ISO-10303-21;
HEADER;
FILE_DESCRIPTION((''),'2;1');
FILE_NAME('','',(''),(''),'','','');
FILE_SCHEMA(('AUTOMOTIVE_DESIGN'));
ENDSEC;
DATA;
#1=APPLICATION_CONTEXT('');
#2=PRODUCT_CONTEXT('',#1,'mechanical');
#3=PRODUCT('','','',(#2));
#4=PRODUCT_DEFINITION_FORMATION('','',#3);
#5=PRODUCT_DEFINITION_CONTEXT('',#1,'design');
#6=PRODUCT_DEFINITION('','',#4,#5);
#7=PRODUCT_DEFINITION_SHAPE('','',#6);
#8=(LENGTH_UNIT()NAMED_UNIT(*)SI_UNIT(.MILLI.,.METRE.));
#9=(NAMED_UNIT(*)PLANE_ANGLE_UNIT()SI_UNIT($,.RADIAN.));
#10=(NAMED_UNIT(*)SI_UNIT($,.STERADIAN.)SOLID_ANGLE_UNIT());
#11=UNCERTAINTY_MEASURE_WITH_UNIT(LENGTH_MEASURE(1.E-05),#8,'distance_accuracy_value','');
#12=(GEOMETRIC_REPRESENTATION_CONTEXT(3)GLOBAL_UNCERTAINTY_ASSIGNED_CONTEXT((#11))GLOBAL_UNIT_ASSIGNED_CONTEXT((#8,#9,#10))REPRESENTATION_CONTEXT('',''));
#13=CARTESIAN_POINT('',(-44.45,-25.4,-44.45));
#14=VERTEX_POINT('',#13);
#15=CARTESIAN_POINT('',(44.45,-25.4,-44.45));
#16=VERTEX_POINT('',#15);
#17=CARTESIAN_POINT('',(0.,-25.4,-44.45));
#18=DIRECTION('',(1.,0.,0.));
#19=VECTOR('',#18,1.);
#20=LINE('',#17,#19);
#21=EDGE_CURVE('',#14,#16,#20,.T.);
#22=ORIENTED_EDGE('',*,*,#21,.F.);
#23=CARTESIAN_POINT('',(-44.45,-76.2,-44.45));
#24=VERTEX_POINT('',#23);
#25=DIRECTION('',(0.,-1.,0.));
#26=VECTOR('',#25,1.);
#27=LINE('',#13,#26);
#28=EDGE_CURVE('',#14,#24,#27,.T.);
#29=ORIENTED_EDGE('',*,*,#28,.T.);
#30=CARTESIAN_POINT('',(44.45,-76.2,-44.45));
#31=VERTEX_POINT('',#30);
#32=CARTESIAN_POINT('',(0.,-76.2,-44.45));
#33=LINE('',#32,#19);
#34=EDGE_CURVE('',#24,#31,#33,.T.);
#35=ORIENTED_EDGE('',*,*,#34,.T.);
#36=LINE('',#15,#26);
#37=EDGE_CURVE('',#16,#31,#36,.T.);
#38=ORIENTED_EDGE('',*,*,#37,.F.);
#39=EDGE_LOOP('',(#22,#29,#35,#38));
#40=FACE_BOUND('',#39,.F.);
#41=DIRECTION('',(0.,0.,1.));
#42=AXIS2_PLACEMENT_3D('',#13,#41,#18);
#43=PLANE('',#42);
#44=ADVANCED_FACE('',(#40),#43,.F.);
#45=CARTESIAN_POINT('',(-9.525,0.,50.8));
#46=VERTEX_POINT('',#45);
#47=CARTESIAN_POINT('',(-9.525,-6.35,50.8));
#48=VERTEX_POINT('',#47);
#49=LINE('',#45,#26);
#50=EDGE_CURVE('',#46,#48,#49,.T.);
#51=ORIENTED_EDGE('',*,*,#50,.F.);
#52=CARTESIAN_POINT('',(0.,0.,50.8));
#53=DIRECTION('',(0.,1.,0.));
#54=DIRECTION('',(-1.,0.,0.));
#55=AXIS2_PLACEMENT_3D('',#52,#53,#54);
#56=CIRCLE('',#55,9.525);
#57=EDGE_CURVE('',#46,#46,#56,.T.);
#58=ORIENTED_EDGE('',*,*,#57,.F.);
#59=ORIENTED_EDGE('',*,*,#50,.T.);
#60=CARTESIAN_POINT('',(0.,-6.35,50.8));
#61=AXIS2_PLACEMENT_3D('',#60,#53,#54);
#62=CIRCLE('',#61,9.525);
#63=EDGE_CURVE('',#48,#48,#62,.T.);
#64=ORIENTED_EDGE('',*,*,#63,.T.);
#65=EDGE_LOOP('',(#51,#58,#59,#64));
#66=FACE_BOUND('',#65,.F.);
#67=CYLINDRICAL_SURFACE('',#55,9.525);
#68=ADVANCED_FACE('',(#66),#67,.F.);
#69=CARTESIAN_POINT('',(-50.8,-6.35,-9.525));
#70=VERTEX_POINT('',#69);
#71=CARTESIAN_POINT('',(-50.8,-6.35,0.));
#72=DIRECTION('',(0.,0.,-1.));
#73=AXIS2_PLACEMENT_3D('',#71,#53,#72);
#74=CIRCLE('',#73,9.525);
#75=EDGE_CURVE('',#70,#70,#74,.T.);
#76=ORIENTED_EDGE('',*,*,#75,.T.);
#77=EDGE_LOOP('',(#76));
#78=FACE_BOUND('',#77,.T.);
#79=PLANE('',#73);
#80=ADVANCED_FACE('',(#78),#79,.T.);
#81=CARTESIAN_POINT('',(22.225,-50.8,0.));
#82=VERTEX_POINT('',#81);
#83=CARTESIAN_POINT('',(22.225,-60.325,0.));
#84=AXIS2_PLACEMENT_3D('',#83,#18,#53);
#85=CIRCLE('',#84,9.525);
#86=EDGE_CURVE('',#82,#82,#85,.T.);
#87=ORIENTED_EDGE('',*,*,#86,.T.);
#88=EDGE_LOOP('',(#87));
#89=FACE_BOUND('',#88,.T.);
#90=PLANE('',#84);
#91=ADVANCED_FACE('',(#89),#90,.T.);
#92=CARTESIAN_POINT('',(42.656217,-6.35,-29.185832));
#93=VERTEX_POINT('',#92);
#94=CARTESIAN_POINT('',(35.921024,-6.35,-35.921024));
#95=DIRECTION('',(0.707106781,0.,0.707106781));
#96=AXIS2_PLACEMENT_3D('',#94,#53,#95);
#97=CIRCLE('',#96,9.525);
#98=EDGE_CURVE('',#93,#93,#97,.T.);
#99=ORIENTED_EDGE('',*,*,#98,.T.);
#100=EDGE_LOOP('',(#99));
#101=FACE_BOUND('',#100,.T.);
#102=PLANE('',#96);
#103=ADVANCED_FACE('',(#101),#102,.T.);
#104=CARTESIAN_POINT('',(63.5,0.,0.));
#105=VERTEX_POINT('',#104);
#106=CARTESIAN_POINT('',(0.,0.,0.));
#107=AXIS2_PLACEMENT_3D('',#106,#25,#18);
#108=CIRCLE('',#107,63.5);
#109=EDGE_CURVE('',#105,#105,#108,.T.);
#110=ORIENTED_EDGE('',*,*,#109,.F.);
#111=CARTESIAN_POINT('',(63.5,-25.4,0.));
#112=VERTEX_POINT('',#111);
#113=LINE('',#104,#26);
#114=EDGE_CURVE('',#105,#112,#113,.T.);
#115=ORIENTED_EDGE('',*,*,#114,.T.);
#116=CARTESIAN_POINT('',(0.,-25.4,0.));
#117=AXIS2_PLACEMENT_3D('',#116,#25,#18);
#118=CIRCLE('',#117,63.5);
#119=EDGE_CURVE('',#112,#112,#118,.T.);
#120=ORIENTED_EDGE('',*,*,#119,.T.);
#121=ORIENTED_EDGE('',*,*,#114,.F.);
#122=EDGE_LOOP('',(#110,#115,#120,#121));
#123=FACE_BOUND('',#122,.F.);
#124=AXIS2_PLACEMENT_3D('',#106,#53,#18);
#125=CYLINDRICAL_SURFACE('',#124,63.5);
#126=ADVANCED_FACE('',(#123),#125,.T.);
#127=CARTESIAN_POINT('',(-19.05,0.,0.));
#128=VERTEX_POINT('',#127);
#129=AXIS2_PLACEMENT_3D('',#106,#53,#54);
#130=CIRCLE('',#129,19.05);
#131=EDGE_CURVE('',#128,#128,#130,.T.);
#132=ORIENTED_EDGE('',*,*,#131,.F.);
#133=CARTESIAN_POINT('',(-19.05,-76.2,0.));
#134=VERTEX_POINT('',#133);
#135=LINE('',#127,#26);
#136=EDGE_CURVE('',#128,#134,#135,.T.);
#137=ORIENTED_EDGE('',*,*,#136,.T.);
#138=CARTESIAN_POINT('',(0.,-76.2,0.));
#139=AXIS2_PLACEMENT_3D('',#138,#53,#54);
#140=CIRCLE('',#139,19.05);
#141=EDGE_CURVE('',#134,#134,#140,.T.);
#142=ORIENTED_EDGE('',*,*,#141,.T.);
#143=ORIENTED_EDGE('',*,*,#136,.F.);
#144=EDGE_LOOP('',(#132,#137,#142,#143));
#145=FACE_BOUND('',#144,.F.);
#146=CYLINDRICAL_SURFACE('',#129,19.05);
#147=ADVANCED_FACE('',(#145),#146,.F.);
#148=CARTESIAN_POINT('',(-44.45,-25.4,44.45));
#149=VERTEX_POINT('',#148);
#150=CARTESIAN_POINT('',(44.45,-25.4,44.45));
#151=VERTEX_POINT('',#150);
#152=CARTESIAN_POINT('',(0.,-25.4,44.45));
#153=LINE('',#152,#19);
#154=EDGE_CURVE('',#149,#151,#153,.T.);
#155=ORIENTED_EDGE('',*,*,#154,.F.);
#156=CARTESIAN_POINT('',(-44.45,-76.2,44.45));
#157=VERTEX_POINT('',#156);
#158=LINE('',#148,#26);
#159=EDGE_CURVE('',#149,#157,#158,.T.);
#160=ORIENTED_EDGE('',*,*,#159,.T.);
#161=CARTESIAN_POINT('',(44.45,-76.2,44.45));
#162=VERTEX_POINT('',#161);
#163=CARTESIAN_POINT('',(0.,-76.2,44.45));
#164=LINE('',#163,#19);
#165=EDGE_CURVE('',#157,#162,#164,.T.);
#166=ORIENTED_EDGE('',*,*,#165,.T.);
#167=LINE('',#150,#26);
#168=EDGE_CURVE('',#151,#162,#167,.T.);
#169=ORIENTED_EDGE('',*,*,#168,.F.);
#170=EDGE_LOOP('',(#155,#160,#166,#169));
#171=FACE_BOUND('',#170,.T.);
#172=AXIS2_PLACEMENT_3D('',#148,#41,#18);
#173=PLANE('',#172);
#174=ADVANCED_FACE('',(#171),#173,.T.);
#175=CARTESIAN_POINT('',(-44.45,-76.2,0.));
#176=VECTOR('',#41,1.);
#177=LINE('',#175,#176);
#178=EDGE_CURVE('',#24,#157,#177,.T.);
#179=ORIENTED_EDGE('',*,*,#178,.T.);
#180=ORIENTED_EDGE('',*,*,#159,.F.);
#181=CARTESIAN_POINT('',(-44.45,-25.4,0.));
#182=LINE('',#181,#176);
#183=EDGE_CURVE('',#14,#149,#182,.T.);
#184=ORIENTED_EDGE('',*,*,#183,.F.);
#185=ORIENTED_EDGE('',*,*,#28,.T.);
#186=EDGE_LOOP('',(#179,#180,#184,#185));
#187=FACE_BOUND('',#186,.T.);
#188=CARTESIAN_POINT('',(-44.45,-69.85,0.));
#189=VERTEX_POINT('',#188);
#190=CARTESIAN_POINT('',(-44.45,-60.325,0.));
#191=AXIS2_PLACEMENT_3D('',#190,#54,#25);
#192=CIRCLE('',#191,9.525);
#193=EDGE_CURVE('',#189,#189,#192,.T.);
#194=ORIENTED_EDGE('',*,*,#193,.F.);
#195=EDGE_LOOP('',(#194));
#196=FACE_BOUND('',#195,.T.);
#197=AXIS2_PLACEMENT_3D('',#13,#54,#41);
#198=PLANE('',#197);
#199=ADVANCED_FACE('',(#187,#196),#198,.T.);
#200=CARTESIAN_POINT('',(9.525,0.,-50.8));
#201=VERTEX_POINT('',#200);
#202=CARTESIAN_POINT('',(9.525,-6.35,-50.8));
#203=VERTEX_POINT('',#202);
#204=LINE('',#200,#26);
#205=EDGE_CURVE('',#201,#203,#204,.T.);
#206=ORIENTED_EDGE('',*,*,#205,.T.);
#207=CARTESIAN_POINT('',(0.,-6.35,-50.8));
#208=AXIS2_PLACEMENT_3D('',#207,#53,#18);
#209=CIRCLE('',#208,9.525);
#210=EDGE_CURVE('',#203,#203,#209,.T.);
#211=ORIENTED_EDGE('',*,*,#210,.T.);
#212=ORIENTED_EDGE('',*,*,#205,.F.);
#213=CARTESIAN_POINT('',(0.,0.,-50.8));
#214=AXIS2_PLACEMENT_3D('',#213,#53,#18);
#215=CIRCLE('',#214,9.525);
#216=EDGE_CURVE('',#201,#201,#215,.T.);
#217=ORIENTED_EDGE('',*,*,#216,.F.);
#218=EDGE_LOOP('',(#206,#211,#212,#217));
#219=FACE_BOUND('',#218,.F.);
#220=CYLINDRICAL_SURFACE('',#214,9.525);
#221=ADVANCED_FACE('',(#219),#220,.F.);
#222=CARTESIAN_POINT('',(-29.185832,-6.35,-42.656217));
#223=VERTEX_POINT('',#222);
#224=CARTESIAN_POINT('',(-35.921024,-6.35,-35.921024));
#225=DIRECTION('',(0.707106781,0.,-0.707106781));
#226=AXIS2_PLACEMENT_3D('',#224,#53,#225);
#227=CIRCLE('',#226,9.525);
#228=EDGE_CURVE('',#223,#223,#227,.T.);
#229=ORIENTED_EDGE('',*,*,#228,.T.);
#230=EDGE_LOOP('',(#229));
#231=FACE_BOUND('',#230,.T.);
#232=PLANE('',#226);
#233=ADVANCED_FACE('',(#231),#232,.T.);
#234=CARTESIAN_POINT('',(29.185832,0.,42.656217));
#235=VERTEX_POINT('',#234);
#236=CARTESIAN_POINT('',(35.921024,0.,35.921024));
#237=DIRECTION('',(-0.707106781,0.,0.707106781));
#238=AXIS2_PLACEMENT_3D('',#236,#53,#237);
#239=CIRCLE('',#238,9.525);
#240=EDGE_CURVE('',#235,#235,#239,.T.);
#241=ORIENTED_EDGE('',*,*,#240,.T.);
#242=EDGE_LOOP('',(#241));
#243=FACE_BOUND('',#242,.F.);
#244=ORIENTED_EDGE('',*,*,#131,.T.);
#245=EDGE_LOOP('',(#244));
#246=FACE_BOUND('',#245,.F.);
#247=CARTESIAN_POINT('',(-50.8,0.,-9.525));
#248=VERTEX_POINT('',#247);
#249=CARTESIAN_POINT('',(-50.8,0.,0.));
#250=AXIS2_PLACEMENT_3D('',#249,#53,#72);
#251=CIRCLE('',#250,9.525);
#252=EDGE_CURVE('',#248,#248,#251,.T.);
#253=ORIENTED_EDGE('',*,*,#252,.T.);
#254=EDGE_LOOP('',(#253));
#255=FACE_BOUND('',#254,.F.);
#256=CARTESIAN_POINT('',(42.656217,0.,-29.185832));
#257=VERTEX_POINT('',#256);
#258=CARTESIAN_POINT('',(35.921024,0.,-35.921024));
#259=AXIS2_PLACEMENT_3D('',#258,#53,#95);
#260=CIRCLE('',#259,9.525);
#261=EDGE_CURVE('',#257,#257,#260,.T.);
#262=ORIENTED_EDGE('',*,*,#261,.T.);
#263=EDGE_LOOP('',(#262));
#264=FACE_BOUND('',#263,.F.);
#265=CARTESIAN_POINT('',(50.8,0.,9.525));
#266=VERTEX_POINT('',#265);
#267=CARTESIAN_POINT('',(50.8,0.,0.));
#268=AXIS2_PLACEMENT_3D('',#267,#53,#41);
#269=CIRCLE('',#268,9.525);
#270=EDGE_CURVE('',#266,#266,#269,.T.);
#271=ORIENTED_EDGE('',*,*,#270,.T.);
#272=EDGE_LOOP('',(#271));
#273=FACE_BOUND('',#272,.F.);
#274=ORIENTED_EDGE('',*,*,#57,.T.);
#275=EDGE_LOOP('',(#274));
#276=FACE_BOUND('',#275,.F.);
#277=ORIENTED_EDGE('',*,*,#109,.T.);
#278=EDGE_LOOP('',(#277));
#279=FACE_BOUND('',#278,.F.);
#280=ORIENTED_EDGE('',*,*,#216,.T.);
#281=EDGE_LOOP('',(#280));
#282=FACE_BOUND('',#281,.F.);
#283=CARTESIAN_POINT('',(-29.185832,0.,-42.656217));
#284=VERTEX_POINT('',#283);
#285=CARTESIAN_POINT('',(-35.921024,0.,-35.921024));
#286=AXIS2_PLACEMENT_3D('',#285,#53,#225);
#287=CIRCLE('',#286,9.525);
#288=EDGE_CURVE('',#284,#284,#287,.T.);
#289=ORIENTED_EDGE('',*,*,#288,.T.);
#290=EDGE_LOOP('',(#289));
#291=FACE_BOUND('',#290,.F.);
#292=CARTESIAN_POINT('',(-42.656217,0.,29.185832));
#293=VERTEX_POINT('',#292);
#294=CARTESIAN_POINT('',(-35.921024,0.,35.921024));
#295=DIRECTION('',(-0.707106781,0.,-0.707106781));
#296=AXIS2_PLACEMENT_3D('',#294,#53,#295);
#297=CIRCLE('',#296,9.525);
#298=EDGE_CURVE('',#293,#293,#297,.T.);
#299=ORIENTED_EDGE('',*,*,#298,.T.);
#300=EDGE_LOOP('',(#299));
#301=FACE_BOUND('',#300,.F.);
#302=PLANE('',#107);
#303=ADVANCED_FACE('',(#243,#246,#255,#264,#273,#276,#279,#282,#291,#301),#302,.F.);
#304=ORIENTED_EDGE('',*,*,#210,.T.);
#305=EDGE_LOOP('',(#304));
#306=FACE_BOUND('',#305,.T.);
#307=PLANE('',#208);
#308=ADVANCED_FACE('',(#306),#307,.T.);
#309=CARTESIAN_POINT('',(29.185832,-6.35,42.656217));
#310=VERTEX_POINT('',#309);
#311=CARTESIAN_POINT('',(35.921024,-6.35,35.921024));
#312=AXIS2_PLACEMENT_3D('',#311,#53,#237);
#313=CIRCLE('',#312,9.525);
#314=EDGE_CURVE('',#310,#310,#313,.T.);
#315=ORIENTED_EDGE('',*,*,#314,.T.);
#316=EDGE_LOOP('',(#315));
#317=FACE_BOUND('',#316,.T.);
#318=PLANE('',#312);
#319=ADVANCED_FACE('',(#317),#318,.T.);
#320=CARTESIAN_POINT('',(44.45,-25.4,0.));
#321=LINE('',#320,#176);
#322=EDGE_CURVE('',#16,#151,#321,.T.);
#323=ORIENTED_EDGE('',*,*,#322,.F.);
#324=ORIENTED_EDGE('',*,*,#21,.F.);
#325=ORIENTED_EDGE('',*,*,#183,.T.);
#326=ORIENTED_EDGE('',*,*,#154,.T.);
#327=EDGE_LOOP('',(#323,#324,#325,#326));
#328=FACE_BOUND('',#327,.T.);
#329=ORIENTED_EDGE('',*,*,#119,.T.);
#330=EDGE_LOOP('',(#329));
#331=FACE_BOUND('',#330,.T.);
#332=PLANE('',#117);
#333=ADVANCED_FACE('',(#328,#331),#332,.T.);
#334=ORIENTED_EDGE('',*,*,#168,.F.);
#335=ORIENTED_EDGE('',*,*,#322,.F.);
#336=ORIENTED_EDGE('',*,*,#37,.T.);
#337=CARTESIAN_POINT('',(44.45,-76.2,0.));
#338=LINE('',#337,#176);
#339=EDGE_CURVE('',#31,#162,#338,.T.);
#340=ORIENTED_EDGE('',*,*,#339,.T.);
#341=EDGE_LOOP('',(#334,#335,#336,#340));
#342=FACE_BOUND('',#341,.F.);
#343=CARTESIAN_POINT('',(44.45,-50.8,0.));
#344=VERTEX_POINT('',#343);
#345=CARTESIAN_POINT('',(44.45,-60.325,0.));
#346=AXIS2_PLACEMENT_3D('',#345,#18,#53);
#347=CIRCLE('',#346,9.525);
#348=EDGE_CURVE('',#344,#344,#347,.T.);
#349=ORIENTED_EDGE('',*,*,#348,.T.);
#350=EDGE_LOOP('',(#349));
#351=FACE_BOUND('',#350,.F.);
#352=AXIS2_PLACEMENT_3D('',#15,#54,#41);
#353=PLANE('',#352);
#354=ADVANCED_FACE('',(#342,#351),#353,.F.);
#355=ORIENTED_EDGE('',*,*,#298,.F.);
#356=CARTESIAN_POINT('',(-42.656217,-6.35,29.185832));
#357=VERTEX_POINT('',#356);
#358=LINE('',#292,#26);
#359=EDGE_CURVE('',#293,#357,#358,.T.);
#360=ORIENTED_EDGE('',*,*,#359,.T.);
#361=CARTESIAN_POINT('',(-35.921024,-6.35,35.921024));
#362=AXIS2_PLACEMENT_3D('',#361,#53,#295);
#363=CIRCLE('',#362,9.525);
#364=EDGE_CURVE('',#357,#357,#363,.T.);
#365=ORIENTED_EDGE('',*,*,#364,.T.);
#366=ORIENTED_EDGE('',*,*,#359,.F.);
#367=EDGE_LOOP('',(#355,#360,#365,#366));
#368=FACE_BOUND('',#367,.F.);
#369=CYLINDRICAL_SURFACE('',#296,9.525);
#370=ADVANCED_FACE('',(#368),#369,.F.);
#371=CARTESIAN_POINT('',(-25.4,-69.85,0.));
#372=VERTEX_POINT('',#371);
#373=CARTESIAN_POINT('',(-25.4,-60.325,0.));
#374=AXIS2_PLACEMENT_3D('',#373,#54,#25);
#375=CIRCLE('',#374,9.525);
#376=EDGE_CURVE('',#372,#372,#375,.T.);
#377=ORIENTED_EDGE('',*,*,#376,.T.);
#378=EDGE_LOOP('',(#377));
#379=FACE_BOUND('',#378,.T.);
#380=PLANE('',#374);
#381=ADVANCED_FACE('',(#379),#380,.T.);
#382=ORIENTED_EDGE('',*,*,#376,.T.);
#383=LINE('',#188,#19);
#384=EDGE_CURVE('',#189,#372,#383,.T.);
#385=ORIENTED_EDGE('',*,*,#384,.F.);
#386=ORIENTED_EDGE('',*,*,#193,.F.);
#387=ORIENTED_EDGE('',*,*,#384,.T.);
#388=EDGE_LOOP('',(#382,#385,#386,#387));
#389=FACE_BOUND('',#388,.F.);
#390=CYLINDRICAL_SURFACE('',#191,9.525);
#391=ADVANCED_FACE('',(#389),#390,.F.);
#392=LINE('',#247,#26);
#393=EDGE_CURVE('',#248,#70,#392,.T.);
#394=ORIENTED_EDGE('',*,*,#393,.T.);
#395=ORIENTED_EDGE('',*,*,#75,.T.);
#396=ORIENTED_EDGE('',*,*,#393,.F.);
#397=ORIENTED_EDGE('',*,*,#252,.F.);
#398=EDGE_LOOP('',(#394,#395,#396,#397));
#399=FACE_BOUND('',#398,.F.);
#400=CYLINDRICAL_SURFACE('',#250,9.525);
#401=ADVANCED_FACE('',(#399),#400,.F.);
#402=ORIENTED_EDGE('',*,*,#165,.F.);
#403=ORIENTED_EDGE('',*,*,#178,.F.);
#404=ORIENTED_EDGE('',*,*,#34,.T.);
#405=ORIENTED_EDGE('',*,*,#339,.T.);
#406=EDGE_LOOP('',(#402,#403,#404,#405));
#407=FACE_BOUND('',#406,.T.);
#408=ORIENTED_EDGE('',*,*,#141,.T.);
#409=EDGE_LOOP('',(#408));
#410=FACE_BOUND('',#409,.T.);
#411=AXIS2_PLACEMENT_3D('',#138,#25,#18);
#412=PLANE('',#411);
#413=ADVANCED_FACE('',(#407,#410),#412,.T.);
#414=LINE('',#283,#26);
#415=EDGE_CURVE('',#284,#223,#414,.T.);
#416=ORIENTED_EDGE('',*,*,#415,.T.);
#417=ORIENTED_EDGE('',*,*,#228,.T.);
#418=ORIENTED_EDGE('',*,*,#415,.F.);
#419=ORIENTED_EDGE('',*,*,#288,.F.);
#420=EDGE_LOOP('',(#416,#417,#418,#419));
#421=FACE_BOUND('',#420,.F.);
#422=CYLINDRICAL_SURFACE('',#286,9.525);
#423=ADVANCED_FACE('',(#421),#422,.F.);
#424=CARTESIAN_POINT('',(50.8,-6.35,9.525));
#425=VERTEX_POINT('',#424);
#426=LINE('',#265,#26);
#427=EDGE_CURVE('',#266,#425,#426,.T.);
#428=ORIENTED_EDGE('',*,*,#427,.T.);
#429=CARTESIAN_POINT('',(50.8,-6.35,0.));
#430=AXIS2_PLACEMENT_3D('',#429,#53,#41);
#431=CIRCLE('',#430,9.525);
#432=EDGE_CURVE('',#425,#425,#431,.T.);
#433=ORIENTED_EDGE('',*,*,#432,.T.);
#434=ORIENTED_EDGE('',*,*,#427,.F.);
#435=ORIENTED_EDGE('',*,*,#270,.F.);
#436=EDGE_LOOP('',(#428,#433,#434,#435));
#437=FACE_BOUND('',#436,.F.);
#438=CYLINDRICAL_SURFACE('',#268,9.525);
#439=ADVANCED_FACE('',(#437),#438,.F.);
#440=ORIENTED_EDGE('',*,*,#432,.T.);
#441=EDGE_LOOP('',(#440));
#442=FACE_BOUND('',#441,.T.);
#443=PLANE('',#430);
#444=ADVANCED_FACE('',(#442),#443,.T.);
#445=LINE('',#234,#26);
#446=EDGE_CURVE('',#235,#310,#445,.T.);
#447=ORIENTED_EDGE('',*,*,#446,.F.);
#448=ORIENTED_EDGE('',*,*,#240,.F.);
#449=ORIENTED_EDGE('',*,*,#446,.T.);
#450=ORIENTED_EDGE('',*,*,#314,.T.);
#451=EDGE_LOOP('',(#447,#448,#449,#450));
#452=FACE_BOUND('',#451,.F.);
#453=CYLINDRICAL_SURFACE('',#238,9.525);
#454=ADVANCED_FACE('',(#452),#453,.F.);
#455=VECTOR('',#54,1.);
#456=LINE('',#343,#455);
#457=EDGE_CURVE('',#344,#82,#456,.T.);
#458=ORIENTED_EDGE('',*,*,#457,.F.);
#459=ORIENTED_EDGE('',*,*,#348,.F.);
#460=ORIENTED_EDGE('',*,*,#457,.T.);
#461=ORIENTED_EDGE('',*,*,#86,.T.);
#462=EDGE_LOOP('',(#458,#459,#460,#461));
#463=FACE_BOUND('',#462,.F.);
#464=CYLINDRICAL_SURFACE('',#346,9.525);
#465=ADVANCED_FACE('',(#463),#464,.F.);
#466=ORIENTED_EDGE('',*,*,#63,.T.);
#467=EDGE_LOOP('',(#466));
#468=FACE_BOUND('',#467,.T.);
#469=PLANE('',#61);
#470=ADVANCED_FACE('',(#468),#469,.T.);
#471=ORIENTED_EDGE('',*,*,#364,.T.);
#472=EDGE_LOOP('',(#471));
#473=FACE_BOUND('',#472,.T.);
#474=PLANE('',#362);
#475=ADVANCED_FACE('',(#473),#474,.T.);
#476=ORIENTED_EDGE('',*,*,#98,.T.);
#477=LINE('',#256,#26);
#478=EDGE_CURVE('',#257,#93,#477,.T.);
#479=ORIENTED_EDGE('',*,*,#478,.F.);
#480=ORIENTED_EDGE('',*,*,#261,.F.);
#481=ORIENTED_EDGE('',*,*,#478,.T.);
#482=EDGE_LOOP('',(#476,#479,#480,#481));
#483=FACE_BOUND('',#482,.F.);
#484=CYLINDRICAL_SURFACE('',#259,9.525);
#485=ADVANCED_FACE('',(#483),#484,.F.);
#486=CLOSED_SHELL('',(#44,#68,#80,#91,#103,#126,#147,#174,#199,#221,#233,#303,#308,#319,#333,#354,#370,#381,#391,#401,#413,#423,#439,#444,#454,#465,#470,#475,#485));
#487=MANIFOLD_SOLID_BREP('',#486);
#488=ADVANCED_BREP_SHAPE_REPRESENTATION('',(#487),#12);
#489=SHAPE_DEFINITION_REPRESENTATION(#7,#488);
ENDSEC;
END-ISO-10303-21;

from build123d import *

# Parameters (mm, degrees)
F0_R            = 63.5
F1_DEPTH        = 25.4
F2_R            = 9.525
F3_DEPTH        = 6.35
F3_COPIES_COUNT = 8
F5_W            = 88.9
F5_H            = 88.9
F6_DEPTH        = 50.8
F4_R            = 19.05
F7_DEPTH        = 101.6
F8_R            = 9.525
F9_DEPTH        = 22.225
F10_R           = 9.525
F11_DEPTH       = 19.05


# Not quite as in the source:
# - a pattern or mirror of a feature is missing from the dataset's text; its kind, count and spacing are read off the source's solid


with BuildPart() as f1:
    # F0 (on Front) → F1 (new body)
    with BuildSketch(Plane.XZ):
        Circle(F0_R)
    extrude(amount=F1_DEPTH)

    # F2 (on face) → F3 (cut)
    with BuildSketch(Plane(origin=(0, 0, 0), x_dir=(-1, 0, 0), z_dir=(0, 1, 0))):
        with Locations((0, 50.8)):
            Circle(F2_R)
    f3 = extrude(amount=-F3_DEPTH, mode=Mode.SUBTRACT)

    # F3_copies: F3 ×8 about axis
    f3_copies_axis = Axis((0, 0, 0), (0, 1, 0))
    for i in range(1, F3_COPIES_COUNT):
        add(f3.rotate(f3_copies_axis, i * 360 / F3_COPIES_COUNT), mode=Mode.SUBTRACT)

    # F5 (on face) → F6 (join)
    with BuildSketch(Plane.XZ.offset(25.4)):
        Rectangle(F5_W, F5_H)
    extrude(amount=F6_DEPTH)

    # F4 (on face) → F7 (cut)
    with BuildSketch(Plane(origin=(0, 0, 0), x_dir=(-1, 0, 0), z_dir=(0, 1, 0))):
        Circle(F4_R)
    extrude(amount=-F7_DEPTH, mode=Mode.SUBTRACT)

    # F8 (on face) → F9 (cut)
    with BuildSketch(Plane.YZ.offset(44.45)):
        with Locations((-60.325, 0)):
            Circle(F8_R)
    extrude(amount=-F9_DEPTH, mode=Mode.SUBTRACT)

    # F10 (on face) → F11 (cut)
    with BuildSketch(Plane(origin=(-44.45, 0, 0), x_dir=(0, -1, 0), z_dir=(-1, 0, 0))):
        with Locations((60.325, 0)):
            Circle(F10_R)
    extrude(amount=-F11_DEPTH, mode=Mode.SUBTRACT)


solid = f1.part
